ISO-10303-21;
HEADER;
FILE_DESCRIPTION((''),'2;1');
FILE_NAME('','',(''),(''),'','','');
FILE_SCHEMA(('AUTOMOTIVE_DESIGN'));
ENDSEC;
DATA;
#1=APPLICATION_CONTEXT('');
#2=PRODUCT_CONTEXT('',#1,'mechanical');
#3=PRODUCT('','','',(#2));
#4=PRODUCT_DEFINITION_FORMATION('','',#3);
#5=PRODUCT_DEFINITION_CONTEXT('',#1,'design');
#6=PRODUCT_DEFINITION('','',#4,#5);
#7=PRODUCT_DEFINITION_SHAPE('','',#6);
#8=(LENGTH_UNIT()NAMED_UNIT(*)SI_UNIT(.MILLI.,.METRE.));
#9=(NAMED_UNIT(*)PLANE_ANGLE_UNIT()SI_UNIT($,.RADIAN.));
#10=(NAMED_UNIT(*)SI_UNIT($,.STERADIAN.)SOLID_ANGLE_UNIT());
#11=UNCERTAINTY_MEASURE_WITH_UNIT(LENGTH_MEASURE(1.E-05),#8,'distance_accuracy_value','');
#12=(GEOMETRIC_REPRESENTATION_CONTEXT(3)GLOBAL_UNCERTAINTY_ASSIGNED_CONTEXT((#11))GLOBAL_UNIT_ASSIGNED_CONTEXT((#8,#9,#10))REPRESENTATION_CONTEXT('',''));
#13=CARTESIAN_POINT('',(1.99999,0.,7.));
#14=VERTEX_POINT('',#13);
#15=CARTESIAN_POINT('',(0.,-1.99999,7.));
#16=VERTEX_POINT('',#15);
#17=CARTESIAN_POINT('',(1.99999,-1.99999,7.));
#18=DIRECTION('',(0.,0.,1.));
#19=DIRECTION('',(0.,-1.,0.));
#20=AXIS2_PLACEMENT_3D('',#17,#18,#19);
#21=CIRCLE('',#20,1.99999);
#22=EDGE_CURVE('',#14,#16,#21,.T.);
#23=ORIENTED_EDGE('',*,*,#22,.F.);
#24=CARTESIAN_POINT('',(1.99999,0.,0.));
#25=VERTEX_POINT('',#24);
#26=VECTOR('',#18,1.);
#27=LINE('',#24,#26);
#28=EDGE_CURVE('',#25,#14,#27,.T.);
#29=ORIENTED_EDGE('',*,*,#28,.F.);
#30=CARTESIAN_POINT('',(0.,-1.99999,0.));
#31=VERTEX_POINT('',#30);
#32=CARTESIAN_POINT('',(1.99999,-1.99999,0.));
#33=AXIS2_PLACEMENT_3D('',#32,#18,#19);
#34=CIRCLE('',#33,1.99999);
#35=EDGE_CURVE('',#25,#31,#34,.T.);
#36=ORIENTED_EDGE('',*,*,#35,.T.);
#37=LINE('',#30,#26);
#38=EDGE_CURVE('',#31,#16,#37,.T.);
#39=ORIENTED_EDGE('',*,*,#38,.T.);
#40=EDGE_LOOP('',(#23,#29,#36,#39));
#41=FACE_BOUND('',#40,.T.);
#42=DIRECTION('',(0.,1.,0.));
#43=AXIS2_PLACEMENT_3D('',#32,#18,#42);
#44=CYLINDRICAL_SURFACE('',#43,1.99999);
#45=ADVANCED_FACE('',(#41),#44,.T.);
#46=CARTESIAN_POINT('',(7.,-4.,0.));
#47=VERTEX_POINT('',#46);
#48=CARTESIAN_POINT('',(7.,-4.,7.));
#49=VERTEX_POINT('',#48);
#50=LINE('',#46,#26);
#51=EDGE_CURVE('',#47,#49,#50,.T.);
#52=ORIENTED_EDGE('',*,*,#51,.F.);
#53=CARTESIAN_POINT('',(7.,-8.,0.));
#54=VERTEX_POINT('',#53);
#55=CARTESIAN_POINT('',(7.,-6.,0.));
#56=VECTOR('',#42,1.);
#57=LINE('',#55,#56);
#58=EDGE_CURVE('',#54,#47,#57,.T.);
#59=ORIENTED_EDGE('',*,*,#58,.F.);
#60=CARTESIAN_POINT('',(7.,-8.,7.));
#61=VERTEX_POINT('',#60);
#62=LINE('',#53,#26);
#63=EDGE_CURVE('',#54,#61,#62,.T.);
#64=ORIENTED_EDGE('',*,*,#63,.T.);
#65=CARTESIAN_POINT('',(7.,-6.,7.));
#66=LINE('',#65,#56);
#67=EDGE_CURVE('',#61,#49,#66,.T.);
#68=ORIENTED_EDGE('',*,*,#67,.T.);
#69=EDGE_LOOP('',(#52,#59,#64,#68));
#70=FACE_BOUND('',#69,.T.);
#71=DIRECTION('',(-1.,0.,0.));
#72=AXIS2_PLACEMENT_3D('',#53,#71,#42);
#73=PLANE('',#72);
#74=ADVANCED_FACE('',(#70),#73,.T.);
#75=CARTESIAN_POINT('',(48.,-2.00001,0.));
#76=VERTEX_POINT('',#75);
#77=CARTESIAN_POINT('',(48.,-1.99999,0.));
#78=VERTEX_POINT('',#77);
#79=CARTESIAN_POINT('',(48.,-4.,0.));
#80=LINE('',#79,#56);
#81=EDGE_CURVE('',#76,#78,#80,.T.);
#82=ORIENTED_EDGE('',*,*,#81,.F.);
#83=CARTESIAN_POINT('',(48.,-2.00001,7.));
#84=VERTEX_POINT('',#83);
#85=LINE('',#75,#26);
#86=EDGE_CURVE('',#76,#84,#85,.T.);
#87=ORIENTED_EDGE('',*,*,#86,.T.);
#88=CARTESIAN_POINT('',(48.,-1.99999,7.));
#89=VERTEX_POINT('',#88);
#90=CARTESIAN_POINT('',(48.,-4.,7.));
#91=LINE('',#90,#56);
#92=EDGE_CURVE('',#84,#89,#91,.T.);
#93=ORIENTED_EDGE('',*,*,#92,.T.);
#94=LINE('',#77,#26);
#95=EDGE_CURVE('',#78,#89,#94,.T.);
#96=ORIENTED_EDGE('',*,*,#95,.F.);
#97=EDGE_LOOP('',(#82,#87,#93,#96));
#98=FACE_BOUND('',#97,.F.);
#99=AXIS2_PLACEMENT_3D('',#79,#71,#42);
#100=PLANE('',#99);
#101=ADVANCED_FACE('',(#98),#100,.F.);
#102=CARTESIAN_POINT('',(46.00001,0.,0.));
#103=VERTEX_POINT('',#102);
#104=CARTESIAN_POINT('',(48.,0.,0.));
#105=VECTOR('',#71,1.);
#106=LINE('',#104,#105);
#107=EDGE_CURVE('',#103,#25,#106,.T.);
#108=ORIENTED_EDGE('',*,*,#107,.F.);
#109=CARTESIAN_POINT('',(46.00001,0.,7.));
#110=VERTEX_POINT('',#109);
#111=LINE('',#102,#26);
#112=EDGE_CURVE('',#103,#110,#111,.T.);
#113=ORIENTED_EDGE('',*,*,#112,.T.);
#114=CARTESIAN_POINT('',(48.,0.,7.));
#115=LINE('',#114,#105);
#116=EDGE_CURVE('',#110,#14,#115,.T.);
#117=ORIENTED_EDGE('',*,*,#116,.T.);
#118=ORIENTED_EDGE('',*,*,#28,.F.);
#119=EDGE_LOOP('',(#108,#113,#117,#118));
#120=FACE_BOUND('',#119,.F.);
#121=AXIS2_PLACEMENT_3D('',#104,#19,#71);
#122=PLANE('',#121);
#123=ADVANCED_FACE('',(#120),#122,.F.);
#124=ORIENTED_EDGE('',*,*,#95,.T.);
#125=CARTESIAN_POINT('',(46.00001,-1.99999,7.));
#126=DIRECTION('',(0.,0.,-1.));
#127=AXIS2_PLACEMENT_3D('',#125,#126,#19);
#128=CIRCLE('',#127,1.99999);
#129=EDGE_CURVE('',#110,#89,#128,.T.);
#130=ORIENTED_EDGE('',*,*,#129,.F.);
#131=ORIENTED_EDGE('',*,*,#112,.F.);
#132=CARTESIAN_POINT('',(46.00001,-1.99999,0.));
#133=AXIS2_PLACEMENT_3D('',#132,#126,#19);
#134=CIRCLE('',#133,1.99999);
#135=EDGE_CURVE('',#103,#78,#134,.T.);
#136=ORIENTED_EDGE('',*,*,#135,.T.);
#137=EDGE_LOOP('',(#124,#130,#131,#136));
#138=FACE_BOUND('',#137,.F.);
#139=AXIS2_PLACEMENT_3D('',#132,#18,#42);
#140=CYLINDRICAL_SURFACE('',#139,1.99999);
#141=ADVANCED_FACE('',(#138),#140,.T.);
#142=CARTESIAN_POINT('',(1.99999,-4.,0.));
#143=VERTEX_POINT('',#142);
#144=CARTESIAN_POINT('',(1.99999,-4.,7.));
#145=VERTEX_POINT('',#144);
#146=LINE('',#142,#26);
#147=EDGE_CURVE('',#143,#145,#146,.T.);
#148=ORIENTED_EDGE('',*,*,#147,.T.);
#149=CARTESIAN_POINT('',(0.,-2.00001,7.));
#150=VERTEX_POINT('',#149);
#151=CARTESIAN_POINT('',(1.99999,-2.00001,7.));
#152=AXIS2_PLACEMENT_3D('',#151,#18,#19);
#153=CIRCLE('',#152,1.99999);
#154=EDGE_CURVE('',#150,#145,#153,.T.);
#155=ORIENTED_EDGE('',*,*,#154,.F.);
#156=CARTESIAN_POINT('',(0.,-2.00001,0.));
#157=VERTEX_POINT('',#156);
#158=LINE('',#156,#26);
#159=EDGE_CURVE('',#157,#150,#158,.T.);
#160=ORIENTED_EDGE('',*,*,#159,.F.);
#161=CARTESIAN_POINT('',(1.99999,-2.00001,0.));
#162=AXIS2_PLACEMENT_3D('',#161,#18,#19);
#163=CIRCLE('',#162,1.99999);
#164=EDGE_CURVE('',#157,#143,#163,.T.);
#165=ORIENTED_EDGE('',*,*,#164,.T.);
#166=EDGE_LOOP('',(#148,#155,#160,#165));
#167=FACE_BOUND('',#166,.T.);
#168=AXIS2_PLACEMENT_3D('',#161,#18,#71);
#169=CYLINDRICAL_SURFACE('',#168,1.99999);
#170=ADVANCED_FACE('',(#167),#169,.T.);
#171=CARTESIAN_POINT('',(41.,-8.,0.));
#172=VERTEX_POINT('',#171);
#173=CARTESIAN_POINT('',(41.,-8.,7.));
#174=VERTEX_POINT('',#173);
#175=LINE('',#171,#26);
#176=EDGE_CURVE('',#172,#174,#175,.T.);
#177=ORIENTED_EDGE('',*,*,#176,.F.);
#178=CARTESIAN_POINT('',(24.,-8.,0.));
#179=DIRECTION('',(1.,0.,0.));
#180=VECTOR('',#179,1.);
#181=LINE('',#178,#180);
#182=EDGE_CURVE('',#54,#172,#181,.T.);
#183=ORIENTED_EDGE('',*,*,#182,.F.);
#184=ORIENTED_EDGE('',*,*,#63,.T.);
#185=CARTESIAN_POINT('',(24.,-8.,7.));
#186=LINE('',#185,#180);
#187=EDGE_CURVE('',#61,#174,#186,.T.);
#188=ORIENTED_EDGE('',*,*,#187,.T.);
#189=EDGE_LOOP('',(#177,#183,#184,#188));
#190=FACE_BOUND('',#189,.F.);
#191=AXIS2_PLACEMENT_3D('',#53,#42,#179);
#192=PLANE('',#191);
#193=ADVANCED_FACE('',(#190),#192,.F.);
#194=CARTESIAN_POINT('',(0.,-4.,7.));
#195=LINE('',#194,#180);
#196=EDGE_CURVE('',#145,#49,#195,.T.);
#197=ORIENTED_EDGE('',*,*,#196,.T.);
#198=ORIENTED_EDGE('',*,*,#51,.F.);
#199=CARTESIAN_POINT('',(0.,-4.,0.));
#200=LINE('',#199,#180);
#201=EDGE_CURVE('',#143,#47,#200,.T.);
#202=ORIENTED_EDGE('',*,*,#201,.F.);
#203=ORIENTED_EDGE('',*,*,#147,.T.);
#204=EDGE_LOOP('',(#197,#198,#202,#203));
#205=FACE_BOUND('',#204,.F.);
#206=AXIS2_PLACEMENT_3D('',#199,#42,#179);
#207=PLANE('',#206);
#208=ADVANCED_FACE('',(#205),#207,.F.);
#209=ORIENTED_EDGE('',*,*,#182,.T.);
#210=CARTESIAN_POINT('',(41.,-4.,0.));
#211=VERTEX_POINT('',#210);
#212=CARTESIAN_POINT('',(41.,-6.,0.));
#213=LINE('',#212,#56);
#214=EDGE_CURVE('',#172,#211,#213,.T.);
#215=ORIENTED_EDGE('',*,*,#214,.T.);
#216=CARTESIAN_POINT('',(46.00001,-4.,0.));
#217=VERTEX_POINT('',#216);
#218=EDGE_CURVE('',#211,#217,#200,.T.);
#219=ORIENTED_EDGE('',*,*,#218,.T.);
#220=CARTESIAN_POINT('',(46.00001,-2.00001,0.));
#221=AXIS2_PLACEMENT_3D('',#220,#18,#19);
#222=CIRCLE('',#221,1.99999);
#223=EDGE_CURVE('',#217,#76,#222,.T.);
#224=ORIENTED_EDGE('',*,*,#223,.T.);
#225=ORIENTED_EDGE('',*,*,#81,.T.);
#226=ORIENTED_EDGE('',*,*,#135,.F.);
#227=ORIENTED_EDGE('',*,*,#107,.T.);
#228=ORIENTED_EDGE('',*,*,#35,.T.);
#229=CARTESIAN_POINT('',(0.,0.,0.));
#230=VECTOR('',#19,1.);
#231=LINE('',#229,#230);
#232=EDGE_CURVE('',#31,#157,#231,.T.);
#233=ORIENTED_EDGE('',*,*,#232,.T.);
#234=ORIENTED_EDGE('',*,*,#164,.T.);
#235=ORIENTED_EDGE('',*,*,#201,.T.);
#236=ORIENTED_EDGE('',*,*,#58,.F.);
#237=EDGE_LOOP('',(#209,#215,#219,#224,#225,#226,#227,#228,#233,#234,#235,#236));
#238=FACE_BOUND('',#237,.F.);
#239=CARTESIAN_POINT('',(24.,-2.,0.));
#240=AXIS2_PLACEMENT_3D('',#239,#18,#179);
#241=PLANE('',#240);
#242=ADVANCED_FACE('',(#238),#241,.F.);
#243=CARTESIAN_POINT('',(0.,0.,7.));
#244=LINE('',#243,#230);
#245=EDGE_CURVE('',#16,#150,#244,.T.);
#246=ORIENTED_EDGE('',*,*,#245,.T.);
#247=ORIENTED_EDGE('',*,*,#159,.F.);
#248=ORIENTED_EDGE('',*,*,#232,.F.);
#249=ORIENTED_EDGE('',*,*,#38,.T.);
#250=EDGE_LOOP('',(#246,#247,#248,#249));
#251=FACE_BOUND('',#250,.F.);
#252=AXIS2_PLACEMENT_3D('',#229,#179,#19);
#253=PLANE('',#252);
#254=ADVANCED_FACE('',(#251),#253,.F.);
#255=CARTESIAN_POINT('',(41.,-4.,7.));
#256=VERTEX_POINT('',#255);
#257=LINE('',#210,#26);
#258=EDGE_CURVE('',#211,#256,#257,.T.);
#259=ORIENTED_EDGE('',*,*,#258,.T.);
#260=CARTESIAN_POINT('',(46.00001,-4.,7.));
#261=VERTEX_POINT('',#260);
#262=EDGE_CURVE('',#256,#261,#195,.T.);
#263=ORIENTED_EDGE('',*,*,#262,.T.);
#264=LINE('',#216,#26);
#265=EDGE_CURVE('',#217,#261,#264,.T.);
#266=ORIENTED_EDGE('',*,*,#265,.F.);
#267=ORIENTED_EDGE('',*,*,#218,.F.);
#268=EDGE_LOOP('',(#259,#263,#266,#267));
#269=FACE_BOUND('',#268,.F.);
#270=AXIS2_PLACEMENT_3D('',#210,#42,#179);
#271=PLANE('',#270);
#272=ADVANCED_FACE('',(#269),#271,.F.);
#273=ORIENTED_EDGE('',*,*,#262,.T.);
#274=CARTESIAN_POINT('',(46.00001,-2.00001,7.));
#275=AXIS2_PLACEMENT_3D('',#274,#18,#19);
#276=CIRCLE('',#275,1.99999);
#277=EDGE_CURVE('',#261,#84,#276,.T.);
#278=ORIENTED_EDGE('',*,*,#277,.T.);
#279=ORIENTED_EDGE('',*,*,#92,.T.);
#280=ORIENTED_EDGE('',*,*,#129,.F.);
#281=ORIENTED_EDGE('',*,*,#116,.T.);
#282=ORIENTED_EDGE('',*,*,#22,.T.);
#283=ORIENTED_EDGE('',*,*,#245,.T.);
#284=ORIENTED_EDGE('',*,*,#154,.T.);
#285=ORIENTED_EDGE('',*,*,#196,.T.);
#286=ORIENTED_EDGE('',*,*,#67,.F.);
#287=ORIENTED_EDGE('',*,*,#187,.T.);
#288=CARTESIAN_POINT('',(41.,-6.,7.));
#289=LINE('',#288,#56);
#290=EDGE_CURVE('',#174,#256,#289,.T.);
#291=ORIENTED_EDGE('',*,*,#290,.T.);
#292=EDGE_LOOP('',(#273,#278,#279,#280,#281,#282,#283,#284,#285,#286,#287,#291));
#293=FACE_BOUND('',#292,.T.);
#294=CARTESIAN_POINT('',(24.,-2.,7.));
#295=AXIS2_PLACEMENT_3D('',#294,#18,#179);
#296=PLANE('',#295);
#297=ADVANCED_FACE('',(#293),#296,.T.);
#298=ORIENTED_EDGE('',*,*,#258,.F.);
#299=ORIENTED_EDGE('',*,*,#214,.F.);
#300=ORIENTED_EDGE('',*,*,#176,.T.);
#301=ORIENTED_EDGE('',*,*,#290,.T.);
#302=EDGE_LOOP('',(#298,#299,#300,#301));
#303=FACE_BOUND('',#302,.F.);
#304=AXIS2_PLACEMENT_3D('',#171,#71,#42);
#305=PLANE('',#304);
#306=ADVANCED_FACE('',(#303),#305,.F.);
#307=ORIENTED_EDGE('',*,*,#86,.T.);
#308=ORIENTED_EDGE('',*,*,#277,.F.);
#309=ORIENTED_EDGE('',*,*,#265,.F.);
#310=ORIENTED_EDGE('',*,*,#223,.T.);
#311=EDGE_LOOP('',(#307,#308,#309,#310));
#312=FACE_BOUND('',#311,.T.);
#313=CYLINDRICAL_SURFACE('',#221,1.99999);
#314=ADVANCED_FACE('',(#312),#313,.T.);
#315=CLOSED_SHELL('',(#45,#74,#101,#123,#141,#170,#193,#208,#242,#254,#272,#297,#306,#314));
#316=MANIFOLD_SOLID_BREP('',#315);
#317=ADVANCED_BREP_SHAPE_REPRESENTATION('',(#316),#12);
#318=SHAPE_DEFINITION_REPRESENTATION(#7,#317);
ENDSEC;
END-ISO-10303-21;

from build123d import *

# Parameters (mm, degrees)
F0_W     = 34
F0_H     = 4
F1_DEPTH = 7
F2_R     = 1.99999


# Not quite as in the source:
# - a fillet or chamfer is up to 0.001 mm smaller than in the source, because OpenCascade refuses the exact size


with BuildPart() as f1:
    # F0 (on Top) → F1 (new body)
    with BuildSketch(Plane.XY):
        Polygon((48, 0), (0, 0), (0, -4), (7, -4), (41, -4), (48, -4), align=None)
        with Locations((24, -6)):
            Rectangle(F0_W, F0_H)
    extrude(amount=F1_DEPTH)

    # F2 (radius 2 in the source; OpenCascade refuses exactly that, so slightly less here)
    f2_edges = [f1.edges().sort_by_distance(p)[0] for p in [
        (48, -4, 3.5),
        (48, 0, 3.5),
        (0, -4, 3.5),
        (0, 0, 3.5),
    ]]
    fillet(f2_edges, radius=F2_R)


solid = f1.part
